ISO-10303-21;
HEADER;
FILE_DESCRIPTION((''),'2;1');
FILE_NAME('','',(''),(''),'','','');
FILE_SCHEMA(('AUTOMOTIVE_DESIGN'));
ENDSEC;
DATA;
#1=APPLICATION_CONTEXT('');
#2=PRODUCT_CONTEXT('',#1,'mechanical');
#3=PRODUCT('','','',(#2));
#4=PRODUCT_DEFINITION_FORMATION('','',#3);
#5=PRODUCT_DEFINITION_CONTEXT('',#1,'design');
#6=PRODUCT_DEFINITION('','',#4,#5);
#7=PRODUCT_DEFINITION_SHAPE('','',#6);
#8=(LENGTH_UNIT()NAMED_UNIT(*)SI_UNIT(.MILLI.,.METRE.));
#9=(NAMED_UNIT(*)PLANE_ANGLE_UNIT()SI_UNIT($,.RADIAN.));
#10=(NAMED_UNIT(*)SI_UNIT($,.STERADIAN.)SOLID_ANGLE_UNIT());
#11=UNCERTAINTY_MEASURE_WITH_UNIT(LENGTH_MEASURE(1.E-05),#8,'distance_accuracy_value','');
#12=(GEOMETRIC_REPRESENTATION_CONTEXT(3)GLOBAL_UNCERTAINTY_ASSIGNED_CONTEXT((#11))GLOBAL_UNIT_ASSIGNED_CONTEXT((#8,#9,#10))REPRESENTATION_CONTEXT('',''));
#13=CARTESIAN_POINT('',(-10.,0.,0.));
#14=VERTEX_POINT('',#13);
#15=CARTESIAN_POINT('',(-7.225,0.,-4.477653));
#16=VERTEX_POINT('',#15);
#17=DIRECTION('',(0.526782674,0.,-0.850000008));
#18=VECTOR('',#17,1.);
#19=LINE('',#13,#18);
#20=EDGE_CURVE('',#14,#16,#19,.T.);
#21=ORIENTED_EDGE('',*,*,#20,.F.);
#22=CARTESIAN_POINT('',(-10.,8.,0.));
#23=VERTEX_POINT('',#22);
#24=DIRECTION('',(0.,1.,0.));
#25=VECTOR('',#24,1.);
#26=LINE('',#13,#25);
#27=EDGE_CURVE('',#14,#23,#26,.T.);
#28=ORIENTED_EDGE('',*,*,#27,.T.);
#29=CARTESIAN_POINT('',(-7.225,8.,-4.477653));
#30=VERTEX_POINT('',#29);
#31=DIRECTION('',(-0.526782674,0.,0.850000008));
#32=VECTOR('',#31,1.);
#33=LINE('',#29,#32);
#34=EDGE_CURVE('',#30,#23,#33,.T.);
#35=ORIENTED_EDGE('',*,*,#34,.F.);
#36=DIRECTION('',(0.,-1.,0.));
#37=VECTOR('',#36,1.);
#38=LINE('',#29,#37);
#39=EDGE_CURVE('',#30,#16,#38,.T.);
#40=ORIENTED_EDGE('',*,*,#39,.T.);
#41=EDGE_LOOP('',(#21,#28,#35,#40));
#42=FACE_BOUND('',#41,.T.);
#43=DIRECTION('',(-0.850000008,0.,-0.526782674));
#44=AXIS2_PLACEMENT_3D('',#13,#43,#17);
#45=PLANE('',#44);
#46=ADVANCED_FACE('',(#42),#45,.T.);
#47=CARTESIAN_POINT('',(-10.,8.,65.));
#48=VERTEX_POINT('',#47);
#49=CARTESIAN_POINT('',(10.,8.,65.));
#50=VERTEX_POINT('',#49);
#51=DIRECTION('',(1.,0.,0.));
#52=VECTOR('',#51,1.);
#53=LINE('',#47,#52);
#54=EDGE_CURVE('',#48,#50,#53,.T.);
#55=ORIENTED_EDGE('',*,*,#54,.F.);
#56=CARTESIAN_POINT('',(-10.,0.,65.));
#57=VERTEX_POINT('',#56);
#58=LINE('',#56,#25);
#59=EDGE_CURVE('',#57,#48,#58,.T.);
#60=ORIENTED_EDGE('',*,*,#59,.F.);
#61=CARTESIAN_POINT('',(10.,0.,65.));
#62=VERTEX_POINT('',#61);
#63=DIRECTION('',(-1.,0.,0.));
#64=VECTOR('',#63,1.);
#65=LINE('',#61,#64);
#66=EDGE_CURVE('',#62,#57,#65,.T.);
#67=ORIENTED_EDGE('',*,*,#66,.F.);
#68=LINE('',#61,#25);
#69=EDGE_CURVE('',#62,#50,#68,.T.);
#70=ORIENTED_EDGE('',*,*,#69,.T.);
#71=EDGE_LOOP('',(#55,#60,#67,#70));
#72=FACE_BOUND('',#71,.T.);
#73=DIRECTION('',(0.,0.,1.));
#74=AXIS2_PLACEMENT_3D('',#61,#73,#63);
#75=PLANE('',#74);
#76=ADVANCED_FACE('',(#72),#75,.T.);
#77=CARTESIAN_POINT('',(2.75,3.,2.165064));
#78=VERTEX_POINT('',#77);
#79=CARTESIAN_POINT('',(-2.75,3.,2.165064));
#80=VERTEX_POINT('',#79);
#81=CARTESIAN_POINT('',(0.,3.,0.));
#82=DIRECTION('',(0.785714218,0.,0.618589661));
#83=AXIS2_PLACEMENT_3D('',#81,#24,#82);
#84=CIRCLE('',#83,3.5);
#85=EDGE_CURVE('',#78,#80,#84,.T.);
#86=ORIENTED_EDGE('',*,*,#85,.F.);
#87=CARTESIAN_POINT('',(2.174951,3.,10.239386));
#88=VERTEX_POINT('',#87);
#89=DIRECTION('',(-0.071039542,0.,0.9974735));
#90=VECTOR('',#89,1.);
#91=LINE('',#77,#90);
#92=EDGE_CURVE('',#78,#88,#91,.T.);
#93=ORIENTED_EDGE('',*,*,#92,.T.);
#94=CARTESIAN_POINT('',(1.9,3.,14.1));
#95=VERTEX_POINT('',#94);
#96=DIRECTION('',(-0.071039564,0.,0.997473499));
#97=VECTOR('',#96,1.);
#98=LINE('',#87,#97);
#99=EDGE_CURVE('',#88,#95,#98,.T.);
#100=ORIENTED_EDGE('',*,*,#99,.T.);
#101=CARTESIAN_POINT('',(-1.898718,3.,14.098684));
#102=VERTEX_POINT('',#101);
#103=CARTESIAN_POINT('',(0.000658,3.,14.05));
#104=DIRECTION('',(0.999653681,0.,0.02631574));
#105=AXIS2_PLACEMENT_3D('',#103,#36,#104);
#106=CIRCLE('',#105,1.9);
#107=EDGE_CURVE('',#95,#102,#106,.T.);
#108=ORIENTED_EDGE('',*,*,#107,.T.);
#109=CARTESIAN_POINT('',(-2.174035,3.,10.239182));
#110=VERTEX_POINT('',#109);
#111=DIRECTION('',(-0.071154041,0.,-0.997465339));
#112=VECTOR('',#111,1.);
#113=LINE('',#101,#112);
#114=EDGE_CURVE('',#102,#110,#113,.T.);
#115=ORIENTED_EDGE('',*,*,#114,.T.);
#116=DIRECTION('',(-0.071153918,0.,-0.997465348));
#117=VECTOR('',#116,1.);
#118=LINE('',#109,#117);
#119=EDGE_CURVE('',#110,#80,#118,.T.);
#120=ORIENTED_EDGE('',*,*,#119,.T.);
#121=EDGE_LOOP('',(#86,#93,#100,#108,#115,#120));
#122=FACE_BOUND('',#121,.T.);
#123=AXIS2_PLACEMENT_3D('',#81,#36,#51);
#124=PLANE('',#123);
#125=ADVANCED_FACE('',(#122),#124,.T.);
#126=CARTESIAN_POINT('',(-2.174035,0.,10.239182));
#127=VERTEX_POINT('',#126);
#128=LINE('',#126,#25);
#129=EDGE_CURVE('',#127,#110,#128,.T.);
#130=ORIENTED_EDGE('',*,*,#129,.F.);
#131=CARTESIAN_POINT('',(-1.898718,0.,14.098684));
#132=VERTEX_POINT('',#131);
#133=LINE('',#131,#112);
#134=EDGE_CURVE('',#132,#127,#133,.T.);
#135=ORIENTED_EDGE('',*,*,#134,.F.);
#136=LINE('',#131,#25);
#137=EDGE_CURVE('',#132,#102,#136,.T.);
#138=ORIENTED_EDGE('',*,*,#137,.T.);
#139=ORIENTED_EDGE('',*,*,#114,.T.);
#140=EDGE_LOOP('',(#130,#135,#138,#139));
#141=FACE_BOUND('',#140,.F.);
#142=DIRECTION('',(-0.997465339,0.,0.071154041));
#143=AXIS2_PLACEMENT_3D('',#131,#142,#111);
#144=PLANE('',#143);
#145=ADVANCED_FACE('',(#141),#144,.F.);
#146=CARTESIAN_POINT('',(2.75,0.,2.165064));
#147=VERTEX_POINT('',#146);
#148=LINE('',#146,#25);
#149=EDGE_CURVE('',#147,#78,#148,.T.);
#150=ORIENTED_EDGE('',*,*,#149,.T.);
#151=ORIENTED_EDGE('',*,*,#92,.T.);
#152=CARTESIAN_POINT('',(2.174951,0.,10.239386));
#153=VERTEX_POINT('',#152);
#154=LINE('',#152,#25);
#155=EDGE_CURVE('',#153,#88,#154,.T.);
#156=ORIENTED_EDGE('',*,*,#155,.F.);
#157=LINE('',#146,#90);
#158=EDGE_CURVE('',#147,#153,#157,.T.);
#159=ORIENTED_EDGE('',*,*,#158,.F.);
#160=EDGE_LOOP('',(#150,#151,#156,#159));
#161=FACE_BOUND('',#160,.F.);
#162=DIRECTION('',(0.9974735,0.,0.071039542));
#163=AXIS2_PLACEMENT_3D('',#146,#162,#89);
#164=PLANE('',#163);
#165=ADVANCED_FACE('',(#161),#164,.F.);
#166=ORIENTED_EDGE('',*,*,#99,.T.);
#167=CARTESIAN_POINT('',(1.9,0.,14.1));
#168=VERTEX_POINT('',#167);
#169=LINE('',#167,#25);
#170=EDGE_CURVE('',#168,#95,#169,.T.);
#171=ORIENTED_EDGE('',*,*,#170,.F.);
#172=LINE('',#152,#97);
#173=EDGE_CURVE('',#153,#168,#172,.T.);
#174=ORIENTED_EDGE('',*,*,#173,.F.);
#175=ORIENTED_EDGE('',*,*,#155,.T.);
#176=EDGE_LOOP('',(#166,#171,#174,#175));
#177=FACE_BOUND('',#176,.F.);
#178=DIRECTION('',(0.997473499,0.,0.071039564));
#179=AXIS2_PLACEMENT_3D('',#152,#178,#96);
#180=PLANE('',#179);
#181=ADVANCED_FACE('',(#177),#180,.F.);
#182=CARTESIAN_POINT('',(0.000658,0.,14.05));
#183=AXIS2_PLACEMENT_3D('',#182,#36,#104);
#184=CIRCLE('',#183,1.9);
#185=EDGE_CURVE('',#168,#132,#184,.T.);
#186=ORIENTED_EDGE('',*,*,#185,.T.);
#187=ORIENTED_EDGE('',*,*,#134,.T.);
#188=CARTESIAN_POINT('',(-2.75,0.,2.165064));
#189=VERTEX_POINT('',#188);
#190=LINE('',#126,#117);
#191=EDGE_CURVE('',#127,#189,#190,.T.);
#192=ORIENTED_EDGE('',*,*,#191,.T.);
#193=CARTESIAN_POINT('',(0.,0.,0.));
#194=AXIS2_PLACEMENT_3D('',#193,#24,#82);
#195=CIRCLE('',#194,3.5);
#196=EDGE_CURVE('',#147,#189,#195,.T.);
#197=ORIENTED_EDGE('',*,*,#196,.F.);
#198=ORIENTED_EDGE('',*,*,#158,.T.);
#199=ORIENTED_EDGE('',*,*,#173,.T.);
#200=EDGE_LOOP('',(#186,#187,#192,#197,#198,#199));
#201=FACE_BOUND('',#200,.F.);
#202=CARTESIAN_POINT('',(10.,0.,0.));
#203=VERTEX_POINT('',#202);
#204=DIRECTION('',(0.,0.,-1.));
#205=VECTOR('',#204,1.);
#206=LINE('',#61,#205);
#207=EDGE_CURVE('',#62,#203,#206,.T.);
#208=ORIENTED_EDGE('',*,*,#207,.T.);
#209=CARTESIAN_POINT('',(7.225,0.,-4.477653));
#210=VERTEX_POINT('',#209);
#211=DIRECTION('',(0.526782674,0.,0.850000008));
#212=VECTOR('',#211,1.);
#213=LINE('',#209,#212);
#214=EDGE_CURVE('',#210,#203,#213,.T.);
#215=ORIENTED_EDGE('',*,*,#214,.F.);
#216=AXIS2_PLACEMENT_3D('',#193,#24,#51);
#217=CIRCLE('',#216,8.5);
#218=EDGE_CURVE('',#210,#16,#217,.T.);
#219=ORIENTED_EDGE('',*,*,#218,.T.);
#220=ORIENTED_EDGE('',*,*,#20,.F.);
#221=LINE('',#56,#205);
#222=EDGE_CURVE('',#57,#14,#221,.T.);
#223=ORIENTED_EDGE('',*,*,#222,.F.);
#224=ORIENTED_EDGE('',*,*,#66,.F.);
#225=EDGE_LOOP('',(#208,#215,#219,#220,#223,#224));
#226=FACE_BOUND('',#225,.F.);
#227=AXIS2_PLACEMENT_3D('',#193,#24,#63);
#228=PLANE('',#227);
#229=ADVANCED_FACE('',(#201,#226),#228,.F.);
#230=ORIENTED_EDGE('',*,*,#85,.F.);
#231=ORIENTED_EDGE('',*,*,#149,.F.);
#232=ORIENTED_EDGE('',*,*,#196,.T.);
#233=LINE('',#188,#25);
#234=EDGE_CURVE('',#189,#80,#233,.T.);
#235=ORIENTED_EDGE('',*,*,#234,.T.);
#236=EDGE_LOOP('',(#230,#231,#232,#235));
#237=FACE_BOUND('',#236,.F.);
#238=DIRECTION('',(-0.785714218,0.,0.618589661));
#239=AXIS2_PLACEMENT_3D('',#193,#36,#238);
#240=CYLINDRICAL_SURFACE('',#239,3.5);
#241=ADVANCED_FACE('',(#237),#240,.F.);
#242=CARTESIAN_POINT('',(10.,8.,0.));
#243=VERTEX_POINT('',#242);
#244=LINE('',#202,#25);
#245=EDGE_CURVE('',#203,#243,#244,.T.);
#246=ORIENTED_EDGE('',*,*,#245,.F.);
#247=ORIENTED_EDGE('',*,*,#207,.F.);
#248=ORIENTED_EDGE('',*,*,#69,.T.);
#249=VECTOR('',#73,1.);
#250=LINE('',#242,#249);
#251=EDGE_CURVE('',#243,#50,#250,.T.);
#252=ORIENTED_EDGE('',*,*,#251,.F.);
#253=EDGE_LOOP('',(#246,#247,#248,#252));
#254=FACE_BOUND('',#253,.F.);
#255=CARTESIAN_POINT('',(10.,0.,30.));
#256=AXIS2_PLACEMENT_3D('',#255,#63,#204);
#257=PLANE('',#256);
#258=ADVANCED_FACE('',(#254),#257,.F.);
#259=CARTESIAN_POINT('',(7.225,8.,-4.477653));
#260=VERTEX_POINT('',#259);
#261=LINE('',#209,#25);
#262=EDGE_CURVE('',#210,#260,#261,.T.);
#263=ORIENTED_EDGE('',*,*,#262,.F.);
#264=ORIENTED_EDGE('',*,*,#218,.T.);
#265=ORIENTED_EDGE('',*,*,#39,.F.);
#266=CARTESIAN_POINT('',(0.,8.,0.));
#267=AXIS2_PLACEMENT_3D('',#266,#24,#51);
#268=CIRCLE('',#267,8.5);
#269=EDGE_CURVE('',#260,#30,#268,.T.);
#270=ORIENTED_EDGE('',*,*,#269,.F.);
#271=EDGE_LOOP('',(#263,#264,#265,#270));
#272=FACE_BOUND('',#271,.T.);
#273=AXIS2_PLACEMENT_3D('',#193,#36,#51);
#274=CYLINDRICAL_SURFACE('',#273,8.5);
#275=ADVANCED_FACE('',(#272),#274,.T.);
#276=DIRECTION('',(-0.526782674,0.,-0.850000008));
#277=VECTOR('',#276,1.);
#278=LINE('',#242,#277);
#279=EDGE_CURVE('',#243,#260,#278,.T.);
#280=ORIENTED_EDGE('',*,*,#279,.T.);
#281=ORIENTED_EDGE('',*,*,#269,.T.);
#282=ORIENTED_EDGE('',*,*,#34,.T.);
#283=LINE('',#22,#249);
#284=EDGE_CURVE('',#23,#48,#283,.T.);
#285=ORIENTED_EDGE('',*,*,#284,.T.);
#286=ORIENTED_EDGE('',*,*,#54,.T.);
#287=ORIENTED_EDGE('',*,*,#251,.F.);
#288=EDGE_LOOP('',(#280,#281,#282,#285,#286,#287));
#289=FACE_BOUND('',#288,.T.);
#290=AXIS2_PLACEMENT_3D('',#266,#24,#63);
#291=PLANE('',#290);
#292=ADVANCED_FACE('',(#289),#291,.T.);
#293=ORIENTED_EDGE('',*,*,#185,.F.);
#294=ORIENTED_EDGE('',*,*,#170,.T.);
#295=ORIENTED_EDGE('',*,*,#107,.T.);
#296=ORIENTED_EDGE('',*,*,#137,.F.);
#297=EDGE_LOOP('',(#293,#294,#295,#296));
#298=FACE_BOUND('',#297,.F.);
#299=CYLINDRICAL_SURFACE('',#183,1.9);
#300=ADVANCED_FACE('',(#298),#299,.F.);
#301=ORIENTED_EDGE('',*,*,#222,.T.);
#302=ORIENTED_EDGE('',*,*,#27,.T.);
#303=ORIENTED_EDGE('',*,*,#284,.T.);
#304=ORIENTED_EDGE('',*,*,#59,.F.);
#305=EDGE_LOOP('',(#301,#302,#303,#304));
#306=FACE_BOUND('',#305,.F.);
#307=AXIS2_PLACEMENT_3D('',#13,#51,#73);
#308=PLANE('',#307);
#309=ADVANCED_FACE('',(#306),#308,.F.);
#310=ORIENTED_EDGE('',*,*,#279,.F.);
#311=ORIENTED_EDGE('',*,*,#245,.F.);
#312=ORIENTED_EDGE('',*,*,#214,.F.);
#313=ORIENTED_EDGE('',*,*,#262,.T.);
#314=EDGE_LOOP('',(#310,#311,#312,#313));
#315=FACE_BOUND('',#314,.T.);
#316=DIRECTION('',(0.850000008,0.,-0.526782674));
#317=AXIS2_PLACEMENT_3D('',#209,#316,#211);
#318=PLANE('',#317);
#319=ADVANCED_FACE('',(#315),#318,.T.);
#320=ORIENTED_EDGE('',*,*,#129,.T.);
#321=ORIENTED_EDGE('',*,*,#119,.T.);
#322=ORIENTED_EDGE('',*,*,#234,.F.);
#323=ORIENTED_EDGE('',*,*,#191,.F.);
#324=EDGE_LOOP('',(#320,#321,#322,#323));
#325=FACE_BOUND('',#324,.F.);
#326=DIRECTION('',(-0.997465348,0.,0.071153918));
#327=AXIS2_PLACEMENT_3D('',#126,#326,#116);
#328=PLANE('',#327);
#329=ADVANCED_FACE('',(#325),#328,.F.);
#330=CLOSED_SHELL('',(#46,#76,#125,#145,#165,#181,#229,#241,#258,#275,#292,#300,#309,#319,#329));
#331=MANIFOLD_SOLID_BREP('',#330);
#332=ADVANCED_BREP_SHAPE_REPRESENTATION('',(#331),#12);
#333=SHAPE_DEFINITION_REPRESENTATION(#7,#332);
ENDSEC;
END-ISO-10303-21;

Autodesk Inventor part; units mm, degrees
ref_plane "YZ Plane" through (0, 0, 0) normal (1, 0, 0) x (0, 1, 0)
ref_plane "XZ Plane" through (0, 0, 0) normal (0, 1, 0) x (-1, 0, 0)
ref_plane "XY Plane" through (0, 0, 0) normal (0, 0, 1) x (1, 0, 0)
sketch "Sketch1" plane through (0, 0, 0) normal (0, 1, 0) x (-1, 0, 0)
  arc A0 (-2.75, 2.165064) -> (2.75, 2.165064) centre (0, 0) ccw
  line L0 (-1.9, 14.1) -> (-2.75, 2.165064)
  line L1 (1.898718, 14.098684) -> (2.75, 2.165064)
  arc A1 (1.898718, 14.098684) -> (-1.9, 14.1) centre (-0.000658, 14.05) ccw
  circle A2 centre (0, 0) radius 0.5
  line L2 (0, 0) -> (0, -10) construction
  line L3 (0, 30) -> (0, 0) construction
  arc A3 (-7.653502, 3.697825) -> (7.653343, 3.698154) centre (0, 0) ccw
  line L4 (7.653343, 3.698154) -> (6.891627, 14.376202)
  arc A4 (6.891627, 14.376202) -> (-6.892842, 14.378331) centre (-0.000658, 14.05) ccw
  line L5 (-6.892842, 14.378331) -> (-7.653502, 3.697825)
  line L6 (10, 0) -> (-10, 0)
  line L7 (-10, 0) -> (-10, 30)
  line L8 (-10, 30) -> (10, 30)
  line L9 (10, 30) -> (10, 0)
  point P0 (-8.5, 0)
  point P1 (8.5, 0)
  dimension "d0" = 1
  dimension "d9" = 1.9
  dimension "d11" = 3.5
  dimension "d34" = 10
  dimension "d42" = 5
  dimension "d43" = 20
  dimension "d44" = 30
sketch "Sketch1 outline for Extrusion6" plane through (0, 0, 0) normal (0, 1, 0) x (-1, 0, 0)
  arc A0 (-8.5, 0) -> (8.5, 0) centre (0, 0) ccw
  line L0 (-10, 0) -> (-8.5, 0)
  line L1 (8.5, 0) -> (10, 0)
  line L2 (-10, 30) -> (-10, 0)
  line L3 (10, 0) -> (10, 30)
  line L4 (10, 30) -> (-10, 30)
  arc A1 (2.75, 2.165064) -> (-2.75, 2.165064) centre (0, 0) cw
  line L5 (1.898718, 14.098684) -> (2.75, 2.165064)
  arc A2 (-1.9, 14.1) -> (1.898718, 14.098684) centre (-0.000658, 14.05) cw
  line L6 (-2.75, 2.165064) -> (-1.9, 14.1)
extrude "Extrusion6" add sketch "Sketch1 outline for Extrusion6" along normal blind 8
sketch "Sketch7" plane through (0, 0, 0) normal (0, -1, 0) x (1, 0, 0)
  arc A0 (-8.5, 0) -> (8.5, 0) centre (0, 0) ccw
  line L0 (10, 30) -> (10, 0)
  line L1 (-10, 0) -> (-10, 30)
  line L2 (-10, 0) -> (-10, 30)
  line L3 (-10, 0) -> (-7.225, -4.477653)
  line L4 (10, 0) -> (7.225, -4.477653)
  line L5 (8.5, 0) -> (10, 0)
  line L6 (-8.5, 0) -> (-10, 0)
  line L7 (-8.5, 0) -> (-10, 0)
sketch "Sketch7 outline for Extrusion7" plane through (0, 0, 0) normal (0, -1, 0) x (1, 0, 0)
  line L0 (-8.5, 0) -> (-10, 0)
  arc A0 (-7.225, -4.477653) -> (-8.5, 0) centre (0, 0) cw
  line L1 (-10, 0) -> (-7.225, -4.477653)
  line L2 (10, 0) -> (8.5, 0)
  line L3 (7.225, -4.477653) -> (10, 0)
  arc A1 (8.5, 0) -> (7.225, -4.477653) centre (0, 0) cw
extrude "Extrusion7" add sketch "Sketch7 outline for Extrusion7" against normal blind 8
sketch "Sketch8" plane through (0, 0, 0) normal (0, -1, 0) x (1, 0, 0)
  line L0 (-10, 0) -> (-7.225, -4.477653)
  arc A0 (-7.225, -4.477653) -> (7.225, -4.477653) centre (0, 0) ccw
  line L1 (7.225, -4.477653) -> (10, 0)
  line L2 (10, 30) -> (10, 0)
  line L3 (-10, 30) -> (10, 30)
  line L4 (-10, 0) -> (-10, 30)
  arc A1 (-2.75, 2.165064) -> (2.75, 2.165064) centre (0, 0) ccw
  line L5 (-1.898718, 14.098684) -> (-2.75, 2.165064)
  arc A2 (1.9, 14.1) -> (-1.898718, 14.098684) centre (0.000658, 14.05) ccw
  line L6 (2.75, 2.165064) -> (1.9, 14.1)
  circle A3 centre (0, 20) radius 10
  line L7 (10, 30) -> (10, 1.423737)
  line L8 (-10, 30) -> (10, 30)
  point P0 (-10, 20)
  point P1 (0, 30)
  point P2 (10, 20)
  point P3 (2.174951, 10.239386)
  point P4 (-2.174035, 10.239182)
  dimension "d50" = 20
sketch "Sketch8 outline for Extrusion8" plane through (0, 0, 0) normal (0, -1, 0) x (1, 0, 0)
  arc A0 (-10, 20) -> (0, 30) centre (0, 20) cw
  line L0 (-10, 30) -> (-10, 20)
  line L1 (0, 30) -> (-10, 30)
  arc A1 (0, 30) -> (10, 20) centre (0, 20) cw
  line L2 (10, 30) -> (0, 30)
  line L3 (10, 20) -> (10, 30)
extrude "Extrusion8" cut sketch "Sketch8 outline for Extrusion8" against normal through all
sketch "Sketch9" plane through (0, 8, 0) normal (0, 1, 0) x (1, 0, 0)
  arc A0 (-10, -20) -> (10, -20) centre (0, -20) ccw
  line L0 (-10, 0) -> (-10, -20)
  arc A1 (-9.25, 1.210176) -> (-10, -1.423737) centre (-5, -1.423737) ccw
  line L1 (-7.225, 4.477653) -> (-10, 0)
  arc A2 (7.225, 4.477653) -> (-7.225, 4.477653) centre (0, 0) ccw
  line L2 (10, 0) -> (7.225, 4.477653)
  arc A3 (10, -1.423737) -> (9.25, 1.210176) centre (5, -1.423737) ccw
  line L3 (10, -20) -> (10, 0)
sketch "Sketch9 outline for Extrusion9" plane through (0, 8, 0) normal (0, 1, 0) x (1, 0, 0)
  arc A0 (-10, -20) -> (10, -20) centre (0, -20) ccw
  line L0 (-10, -1.423737) -> (-10, -20)
  arc A1 (-9.25, 1.210176) -> (-10, -1.423737) centre (-5, -1.423737) ccw
  line L1 (-7.225, 4.477653) -> (-9.25, 1.210176)
  arc A2 (7.225, 4.477653) -> (-7.225, 4.477653) centre (0, 0) ccw
  line L2 (9.25, 1.210176) -> (7.225, 4.477653)
  arc A3 (10, -1.423737) -> (9.25, 1.210176) centre (5, -1.423737) ccw
  line L3 (10, -20) -> (10, -1.423737)
extrude "Extrusion9" add sketch "Sketch9 outline for Extrusion9" against normal blind 5
sketch "Sketch10" plane through (0, 0, 0) normal (0, -1, 0) x (1, 0, 0)
  line L0 (10, 20) -> (10, 0) projected
  line L1 (0, 0) -> (10, 0)
  line L2 (10, 0) -> (10, 65)
  line L3 (10, 65) -> (0, 65)
  line L4 (0, 65) -> (0, 0) construction
  line L5 (-10, 0) -> (-10, 20) projected
  line L6 (0, 0) -> (-10, 0)
  line L7 (-10, 0) -> (-10, 65)
  line L8 (-10, 65) -> (0, 65)
  dimension "d55" = 65
sketch "Sketch10 outline for Extrusion10" plane through (0, 0, 0) normal (0, -1, 0) x (1, 0, 0)
  line L0 (-10, 0) -> (0, 0)
  line L1 (-10, 20) -> (-10, 0)
  line L2 (-10, 65) -> (-10, 20)
  line L3 (0, 65) -> (-10, 65)
  line L4 (10, 65) -> (0, 65)
  line L5 (10, 20) -> (10, 65)
  line L6 (10, 0) -> (10, 20)
  line L7 (0, 0) -> (10, 0)
extrude "Extrusion10" add sketch "Sketch10 outline for Extrusion10" against normal blind 8
sketch "Sketch8 outline for Extrusion11" plane through (0, 0, 0) normal (0, -1, 0) x (1, 0, 0)
  arc A0 (-2.75, 2.165064) -> (2.75, 2.165064) centre (0, 0) ccw
  line L0 (-2.174035, 10.239182) -> (-2.75, 2.165064)
  arc A1 (2.174951, 10.239386) -> (-2.174035, 10.239182) centre (0, 20) cw
  line L1 (2.75, 2.165064) -> (2.174951, 10.239386)
extrude "Extrusion11" cut sketch "Sketch8 outline for Extrusion11" against normal blind 3
sketch "Sketch8 outline for Extrusion12" plane through (0, 0, 0) normal (0, -1, 0) x (1, 0, 0)
  arc A0 (1.9, 14.1) -> (-1.898718, 14.098684) centre (0.000658, 14.05) ccw
  line L0 (2.174951, 10.239386) -> (1.9, 14.1)
  arc A1 (-2.174035, 10.239182) -> (2.174951, 10.239386) centre (0, 20) ccw
  line L1 (-1.898718, 14.098684) -> (-2.174035, 10.239182)
extrude "Extrusion12" cut sketch "Sketch8 outline for Extrusion12" against normal blind 3
properties part number "Servo_Shaft_select_V2_3DPrint"
